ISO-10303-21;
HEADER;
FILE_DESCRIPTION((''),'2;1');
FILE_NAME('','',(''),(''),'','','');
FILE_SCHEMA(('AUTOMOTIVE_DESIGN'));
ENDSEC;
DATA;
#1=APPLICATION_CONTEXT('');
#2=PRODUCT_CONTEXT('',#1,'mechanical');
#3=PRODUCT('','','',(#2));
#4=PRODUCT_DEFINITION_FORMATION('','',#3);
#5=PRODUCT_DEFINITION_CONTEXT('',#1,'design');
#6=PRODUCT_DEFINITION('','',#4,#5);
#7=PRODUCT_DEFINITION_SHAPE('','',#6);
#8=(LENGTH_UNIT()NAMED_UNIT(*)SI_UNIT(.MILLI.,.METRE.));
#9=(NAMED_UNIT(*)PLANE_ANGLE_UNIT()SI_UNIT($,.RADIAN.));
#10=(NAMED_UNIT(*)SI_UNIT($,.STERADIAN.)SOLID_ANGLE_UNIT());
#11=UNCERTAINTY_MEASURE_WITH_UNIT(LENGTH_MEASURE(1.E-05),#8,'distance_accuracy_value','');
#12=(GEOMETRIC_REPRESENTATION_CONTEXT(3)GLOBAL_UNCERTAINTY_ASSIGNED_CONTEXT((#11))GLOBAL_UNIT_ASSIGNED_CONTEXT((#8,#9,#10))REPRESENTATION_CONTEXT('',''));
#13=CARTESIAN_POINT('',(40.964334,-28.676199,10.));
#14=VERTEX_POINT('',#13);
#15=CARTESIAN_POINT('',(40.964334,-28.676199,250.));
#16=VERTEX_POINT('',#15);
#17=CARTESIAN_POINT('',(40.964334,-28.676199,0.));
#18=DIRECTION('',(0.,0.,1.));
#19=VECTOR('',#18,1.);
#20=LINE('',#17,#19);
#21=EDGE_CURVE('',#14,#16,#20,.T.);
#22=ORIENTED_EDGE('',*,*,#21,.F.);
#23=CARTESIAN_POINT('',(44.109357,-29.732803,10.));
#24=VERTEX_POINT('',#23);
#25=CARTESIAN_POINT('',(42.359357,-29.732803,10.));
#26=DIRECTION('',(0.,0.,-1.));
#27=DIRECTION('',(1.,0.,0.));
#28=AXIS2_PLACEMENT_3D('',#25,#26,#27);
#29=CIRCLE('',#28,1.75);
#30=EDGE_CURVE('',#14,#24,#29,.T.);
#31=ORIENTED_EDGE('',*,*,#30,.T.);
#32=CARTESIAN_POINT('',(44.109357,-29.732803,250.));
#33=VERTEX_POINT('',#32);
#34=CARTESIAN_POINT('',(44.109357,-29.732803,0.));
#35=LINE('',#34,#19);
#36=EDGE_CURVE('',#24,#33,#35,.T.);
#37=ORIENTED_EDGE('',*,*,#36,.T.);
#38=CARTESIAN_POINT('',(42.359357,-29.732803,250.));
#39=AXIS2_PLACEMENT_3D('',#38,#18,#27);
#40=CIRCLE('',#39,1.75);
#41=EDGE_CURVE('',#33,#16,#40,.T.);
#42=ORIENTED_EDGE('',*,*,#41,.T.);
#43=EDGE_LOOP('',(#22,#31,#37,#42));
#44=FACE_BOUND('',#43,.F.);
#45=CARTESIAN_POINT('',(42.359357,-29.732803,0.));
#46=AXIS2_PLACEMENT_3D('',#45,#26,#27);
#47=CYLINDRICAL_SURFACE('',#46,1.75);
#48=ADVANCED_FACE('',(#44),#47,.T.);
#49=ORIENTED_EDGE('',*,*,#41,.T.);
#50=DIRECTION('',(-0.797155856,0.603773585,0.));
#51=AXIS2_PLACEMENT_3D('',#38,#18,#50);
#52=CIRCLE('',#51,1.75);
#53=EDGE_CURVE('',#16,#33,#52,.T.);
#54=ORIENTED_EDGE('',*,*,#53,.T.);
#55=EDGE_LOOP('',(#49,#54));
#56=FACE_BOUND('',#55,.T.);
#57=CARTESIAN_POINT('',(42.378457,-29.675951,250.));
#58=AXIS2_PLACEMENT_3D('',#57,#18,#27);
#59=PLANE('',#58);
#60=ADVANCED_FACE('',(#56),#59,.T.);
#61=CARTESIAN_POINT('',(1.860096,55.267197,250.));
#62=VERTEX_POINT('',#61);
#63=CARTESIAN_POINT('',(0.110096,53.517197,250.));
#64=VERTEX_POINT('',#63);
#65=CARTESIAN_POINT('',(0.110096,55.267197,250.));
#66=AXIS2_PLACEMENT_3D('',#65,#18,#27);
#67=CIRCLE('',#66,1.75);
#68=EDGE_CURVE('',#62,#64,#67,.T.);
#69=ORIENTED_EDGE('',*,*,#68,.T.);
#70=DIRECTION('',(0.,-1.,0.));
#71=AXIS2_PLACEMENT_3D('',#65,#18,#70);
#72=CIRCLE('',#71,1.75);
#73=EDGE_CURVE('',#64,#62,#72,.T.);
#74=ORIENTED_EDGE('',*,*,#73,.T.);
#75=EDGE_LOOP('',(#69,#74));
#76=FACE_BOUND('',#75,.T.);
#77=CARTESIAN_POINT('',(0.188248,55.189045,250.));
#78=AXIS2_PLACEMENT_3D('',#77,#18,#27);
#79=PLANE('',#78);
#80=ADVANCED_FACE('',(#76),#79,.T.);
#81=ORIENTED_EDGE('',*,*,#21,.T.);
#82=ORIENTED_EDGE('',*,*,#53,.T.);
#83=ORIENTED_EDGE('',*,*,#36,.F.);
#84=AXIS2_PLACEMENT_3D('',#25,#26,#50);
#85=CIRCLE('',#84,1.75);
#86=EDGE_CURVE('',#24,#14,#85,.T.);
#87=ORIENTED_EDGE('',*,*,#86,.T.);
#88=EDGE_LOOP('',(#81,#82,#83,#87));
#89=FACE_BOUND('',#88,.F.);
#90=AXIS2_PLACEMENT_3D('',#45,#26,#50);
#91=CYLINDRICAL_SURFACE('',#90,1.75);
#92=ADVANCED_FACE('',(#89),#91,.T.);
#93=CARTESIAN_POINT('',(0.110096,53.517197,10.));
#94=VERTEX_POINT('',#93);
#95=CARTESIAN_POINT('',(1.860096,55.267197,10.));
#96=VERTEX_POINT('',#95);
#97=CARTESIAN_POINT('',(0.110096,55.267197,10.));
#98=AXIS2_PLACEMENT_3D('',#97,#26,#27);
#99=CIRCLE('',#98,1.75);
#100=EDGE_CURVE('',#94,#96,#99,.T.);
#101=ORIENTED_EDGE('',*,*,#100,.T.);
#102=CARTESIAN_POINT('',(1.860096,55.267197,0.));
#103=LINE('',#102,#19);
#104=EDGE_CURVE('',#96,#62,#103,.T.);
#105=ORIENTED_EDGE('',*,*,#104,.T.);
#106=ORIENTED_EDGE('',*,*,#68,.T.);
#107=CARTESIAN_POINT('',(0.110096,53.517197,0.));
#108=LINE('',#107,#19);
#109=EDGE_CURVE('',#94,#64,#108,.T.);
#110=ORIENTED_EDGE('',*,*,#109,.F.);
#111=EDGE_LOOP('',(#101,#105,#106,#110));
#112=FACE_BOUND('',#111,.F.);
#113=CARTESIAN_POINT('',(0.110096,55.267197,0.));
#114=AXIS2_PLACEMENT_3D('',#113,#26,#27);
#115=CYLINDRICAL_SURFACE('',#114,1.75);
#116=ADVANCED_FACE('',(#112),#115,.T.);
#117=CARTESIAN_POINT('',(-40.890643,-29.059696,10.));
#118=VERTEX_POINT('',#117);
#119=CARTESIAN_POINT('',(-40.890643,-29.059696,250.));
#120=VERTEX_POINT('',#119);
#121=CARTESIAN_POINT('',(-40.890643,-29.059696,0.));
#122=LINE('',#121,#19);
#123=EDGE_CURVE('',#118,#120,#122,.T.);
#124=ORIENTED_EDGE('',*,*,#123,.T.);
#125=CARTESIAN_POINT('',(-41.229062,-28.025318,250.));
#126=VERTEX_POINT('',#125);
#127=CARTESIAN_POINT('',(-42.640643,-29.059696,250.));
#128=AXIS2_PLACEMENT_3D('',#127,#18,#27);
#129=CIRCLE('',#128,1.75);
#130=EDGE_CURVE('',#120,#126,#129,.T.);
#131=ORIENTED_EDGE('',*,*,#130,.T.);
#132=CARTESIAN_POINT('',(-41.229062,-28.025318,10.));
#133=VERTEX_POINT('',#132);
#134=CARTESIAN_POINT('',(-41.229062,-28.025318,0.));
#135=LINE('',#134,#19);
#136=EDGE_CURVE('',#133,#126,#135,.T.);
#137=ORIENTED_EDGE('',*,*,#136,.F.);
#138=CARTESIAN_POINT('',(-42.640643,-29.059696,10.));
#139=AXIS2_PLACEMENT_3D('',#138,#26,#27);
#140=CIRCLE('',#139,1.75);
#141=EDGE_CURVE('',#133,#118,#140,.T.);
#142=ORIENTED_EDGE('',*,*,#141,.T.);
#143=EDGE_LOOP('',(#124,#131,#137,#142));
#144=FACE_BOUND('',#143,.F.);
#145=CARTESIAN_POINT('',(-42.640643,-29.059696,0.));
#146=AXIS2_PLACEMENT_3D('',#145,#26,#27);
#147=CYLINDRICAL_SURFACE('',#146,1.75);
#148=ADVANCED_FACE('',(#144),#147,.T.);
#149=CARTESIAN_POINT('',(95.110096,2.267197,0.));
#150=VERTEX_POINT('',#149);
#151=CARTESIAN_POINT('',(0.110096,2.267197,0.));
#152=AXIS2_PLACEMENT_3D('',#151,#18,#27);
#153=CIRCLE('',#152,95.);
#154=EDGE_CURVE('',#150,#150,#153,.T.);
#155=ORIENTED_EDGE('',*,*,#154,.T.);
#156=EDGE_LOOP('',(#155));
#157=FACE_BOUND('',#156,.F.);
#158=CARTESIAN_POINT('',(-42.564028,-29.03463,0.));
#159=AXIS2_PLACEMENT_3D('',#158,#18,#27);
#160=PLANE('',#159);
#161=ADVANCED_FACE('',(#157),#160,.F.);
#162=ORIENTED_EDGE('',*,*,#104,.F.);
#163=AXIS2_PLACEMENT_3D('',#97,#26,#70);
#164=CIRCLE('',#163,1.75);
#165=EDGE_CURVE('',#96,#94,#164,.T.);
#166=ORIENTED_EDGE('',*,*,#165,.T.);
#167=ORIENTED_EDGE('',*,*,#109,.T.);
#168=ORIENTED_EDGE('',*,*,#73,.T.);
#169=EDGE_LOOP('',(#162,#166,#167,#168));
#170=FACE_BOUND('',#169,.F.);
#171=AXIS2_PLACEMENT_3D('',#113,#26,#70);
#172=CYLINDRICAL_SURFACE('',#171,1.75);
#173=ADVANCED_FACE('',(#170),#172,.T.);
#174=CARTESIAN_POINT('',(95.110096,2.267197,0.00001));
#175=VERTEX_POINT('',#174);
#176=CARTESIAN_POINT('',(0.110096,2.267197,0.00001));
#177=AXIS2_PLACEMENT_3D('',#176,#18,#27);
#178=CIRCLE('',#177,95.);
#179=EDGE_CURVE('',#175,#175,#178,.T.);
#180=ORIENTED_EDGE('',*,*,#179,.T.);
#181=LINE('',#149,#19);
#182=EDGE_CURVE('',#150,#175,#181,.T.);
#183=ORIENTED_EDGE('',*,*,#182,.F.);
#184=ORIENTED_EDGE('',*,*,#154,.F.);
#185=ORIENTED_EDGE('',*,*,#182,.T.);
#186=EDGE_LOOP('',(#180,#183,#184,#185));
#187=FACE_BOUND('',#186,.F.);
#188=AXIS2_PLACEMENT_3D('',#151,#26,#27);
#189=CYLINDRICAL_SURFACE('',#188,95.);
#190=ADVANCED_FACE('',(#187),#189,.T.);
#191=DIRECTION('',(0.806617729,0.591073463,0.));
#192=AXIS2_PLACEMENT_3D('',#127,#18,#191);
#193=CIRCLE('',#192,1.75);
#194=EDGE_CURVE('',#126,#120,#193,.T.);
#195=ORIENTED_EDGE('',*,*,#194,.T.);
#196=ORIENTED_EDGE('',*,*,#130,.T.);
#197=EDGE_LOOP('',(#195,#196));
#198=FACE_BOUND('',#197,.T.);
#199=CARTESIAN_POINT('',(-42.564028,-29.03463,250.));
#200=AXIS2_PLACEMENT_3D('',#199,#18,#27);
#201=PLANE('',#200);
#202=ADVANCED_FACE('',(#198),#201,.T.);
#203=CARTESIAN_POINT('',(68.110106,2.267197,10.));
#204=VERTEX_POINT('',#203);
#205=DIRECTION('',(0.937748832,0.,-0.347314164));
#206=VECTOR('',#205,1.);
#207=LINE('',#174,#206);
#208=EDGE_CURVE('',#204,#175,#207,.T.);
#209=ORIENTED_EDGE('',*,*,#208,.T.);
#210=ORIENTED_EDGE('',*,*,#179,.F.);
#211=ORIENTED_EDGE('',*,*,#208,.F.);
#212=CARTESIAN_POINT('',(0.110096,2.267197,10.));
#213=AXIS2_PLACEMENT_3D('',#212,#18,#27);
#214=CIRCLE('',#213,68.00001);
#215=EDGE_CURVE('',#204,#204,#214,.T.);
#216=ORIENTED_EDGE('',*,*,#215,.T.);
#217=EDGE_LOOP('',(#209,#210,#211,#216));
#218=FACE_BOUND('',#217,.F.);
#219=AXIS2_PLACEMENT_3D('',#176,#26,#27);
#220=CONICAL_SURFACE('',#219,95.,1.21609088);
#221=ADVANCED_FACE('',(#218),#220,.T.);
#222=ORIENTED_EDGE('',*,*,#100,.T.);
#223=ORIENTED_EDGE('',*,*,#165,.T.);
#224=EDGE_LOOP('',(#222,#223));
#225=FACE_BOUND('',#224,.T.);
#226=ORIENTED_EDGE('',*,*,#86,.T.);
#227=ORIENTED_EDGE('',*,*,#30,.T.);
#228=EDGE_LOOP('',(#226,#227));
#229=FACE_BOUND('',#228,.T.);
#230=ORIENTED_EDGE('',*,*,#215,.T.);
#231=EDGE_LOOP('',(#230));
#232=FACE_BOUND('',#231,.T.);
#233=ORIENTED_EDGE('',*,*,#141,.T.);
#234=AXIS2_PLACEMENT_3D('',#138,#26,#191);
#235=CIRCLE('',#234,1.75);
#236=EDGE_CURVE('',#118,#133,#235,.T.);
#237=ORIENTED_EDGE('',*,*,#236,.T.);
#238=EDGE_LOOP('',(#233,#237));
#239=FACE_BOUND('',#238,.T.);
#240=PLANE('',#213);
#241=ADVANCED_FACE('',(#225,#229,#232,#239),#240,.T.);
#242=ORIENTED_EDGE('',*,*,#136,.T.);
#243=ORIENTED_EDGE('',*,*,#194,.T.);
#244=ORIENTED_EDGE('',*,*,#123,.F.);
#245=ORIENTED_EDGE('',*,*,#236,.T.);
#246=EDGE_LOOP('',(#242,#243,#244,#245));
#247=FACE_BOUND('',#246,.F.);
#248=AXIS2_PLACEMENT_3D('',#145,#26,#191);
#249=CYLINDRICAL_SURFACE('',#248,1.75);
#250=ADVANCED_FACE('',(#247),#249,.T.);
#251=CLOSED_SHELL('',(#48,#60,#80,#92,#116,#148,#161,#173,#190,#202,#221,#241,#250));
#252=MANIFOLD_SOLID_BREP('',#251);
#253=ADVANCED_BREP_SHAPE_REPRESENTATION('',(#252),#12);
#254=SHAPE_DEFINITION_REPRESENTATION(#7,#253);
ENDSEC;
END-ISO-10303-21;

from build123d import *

# Parameters (mm, degrees)
F0_R     = 95
F0_R_2   = 67.5
F1_DEPTH = 10
F2_DEPTH = 250
F3_SIZE2 = 9.99999
F3_SIZE  = 26.99999


# Not quite as in the source:
# - a fillet or chamfer is up to 0.001 mm smaller than in the source, because OpenCascade refuses the exact size


with BuildPart() as f1:
    # F0 (on Top) → F1 (new body)
    with BuildSketch(Plane.XY):
        with Locations((0.1100962768, 2.267197317)):
            Circle(F0_R)
        with Locations((0.1100962768, 2.267197317)):
            Circle(F0_R_2, mode=Mode.SUBTRACT)
        with Locations((0.1100962768, 2.267197317)):
            Circle(F0_R_2)
        with BuildLine():
            ThreePointArc((6.0992865392, 51.907197317), (37.5230586904, 35.4375190435), (50.1100962768, 2.267197317))
            ThreePointArc((50.1100962768, 2.267197317), (48.3767855016, -10.783730285), (43.2970278259, -22.9298053495))
            ThreePointArc((43.2970278259, -22.9298053495), (45.8842269178, -26.923009929), (44.7508248724, -31.5441225396))
            ThreePointArc((44.7508248724, -31.5441225396), (40.609581916, -33.8870690977), (36.064798075, -32.4784415259))
            ThreePointArc((36.064798075, -32.4784415259), (-0.285836282, -47.7312350325), (-36.3903563745, -31.9046764427))
            ThreePointArc((-36.3903563745, -31.9046764427), (-40.9568776568, -33.2411525931), (-45.060496325, -30.8329169426))
            ThreePointArc((-45.060496325, -30.8329169426), (-46.1205736098, -26.1944339166), (-43.4704592341, -22.2427023433))
            ThreePointArc((-43.4704592341, -22.2427023433), (-44.4863366402, 24.8760046956), (-5.8790939857, 51.907197317))
            ThreePointArc((-5.8790939857, 51.907197317), (-4.2579696568, 56.3805900773), (0.1100962768, 58.267197317))
            ThreePointArc((0.1100962768, 58.267197317), (4.4781622103, 56.3805900773), (6.0992865392, 51.907197317))
        make_face(mode=Mode.SUBTRACT)
        with BuildLine():
            ThreePointArc((45.1100962768, 2.267197317), (31.9299014302, 34.0870024704), (0.1100962768, 47.267197317))
            Line((0.1100962768, 47.267197317), (0.1100962768, 2.267197317))
            Line((0.1100962768, 2.267197317), (35.9821097803, -24.9026140037))
            ThreePointArc((35.9821097803, -24.9026140037), (42.7671039523, -12.0638771776), (45.1100962768, 2.267197317))
        make_face()
        with BuildLine():
            Line((0.1100962768, 2.267197317), (0.1100962768, 47.267197317))
            ThreePointArc((0.1100962768, 47.267197317), (-40.0266933485, 22.6151239577), (-36.1877015405, -24.3311085241))
            Line((-36.1877015405, -24.3311085241), (0.1100962768, 2.267197317))
        make_face()
        with BuildLine():
            ThreePointArc((-36.1877015405, -24.3311085241), (-0.2462430261, -42.7313917975), (35.9821097803, -24.9026140037))
            Line((35.9821097803, -24.9026140037), (0.1100962768, 2.267197317))
            Line((0.1100962768, 2.267197317), (-36.1877015405, -24.3311085241))
        make_face()
        with BuildLine():
            ThreePointArc((48.6100962768, 2.267197317), (34.4047751643, 36.5618762046), (0.1100962768, 50.767197317))
            Line((0.1100962768, 50.767197317), (0.1100962768, 48.267197317))
            ThreePointArc((0.1100962768, 48.267197317), (32.6370082114, 34.7941092516), (46.1100962768, 2.267197317))
            ThreePointArc((46.1100962768, 2.267197317), (43.7150374562, -12.3823454997), (36.7792656359, -25.5063875886))
            Line((36.7792656359, -25.5063875886), (38.772155275, -27.0158215509))
            ThreePointArc((38.772155275, -27.0158215509), (46.0848712159, -13.178516305), (48.6100962768, 2.267197317))
        make_face()
        with BuildLine():
            Line((0.1100962768, 48.267197317), (0.1100962768, 50.767197317))
            ThreePointArc((0.1100962768, 50.767197317), (-43.1484436527, 24.1977404742), (-39.0108635929, -26.399865645))
            Line((-39.0108635929, -26.399865645), (-36.9943192698, -24.9221819872))
            ThreePointArc((-36.9943192698, -24.9221819872), (-40.9186220069, 23.0673001053), (0.1100962768, 48.267197317))
        make_face()
        with BuildLine():
            ThreePointArc((-39.0108635929, -26.399865645), (-0.2739583052, -46.231282062), (38.772155275, -27.0158215509))
            Line((38.772155275, -27.0158215509), (36.7792656359, -25.5063875886))
            ThreePointArc((36.7792656359, -25.5063875886), (-0.2541616773, -43.7313604445), (-36.9943192698, -24.9221819872))
            Line((-36.9943192698, -24.9221819872), (-39.0108635929, -26.399865645))
        make_face()
        with BuildLine():
            ThreePointArc((43.2970278259, -22.9298053495), (48.3767855016, -10.783730285), (50.1100962768, 2.267197317))
            ThreePointArc((50.1100962768, 2.267197317), (37.5230586904, 35.4375190435), (6.0992865392, 51.907197317))
            ThreePointArc((6.0992865392, 51.907197317), (3.1100962768, 52.1771161709), (0.1100962768, 52.267197317))
            Line((0.1100962768, 52.267197317), (0.1100962768, 50.767197317))
            ThreePointArc((0.1100962768, 50.767197317), (34.4047751643, 36.5618762046), (48.6100962768, 2.267197317))
            ThreePointArc((48.6100962768, 2.267197317), (46.0848712159, -13.178516305), (38.772155275, -27.0158215509))
            Line((38.772155275, -27.0158215509), (39.9678890584, -27.9214819282))
            ThreePointArc((39.967889049, -27.9214819407), (41.7074010957, -25.4756257513), (43.2970278259, -22.9298053495))
        make_face()
        with BuildLine():
            Line((0.1100962768, 50.767197317), (0.1100962768, 52.267197317))
            ThreePointArc((0.1100962768, 52.267197317), (-2.8899037232, 52.1771161709), (-5.8790939857, 51.907197317))
            ThreePointArc((-5.8790939857, 51.907197317), (-44.4863366402, 24.8760046956), (-43.4704592341, -22.2427023433))
            ThreePointArc((-43.4704592341, -22.2427023433), (-41.9213495256, -24.8133780786), (-40.2207901845, -27.286475843))
            Line((-40.2207901869, -27.2864758397), (-39.0108635929, -26.399865645))
            ThreePointArc((-39.0108635929, -26.399865645), (-43.1484436527, 24.1977404742), (0.1100962768, 50.767197317))
        make_face()
        with BuildLine():
            ThreePointArc((36.064798075, -32.4784415259), (38.0847595855, -30.2585608845), (39.967889049, -27.9214819407))
            Line((39.9678890584, -27.9214819282), (38.772155275, -27.0158215509))
            ThreePointArc((38.772155275, -27.0158215509), (-0.2739583052, -46.231282062), (-39.0108635929, -26.399865645))
            Line((-39.0108635929, -26.399865645), (-40.2207901869, -27.2864758397))
            ThreePointArc((-40.2207901845, -27.286475843), (-38.3749087466, -29.6530844541), (-36.3903563745, -31.9046764427))
            ThreePointArc((-36.3903563745, -31.9046764427), (-0.285836282, -47.7312350325), (36.064798075, -32.4784415259))
        make_face()
        with BuildLine():
            ThreePointArc((46.1100962768, 2.267197317), (32.6370082114, 34.7941092516), (0.1100962768, 48.267197317))
            Line((0.1100962768, 48.267197317), (0.1100962768, 47.267197317))
            ThreePointArc((0.1100962768, 47.267197317), (31.9299014302, 34.0870024704), (45.1100962768, 2.267197317))
            ThreePointArc((45.1100962768, 2.267197317), (42.7671039523, -12.0638771776), (35.9821097803, -24.9026140037))
            Line((35.9821097803, -24.9026140037), (36.7792656359, -25.5063875886))
            ThreePointArc((36.7792656359, -25.5063875886), (43.7150374562, -12.3823454997), (46.1100962768, 2.267197317))
        make_face()
        with BuildLine():
            Line((0.1100962768, 47.267197317), (0.1100962768, 48.267197317))
            ThreePointArc((0.1100962768, 48.267197317), (-40.9186220069, 23.0673001053), (-36.9943192698, -24.9221819872))
            Line((-36.9943192698, -24.9221819872), (-36.1877015405, -24.3311085241))
            ThreePointArc((-36.1877015405, -24.3311085241), (-40.0266933485, 22.6151239577), (0.1100962768, 47.267197317))
        make_face()
        with BuildLine():
            ThreePointArc((-36.9943192698, -24.9221819872), (-0.2541616773, -43.7313604445), (36.7792656359, -25.5063875886))
            Line((36.7792656359, -25.5063875886), (35.9821097803, -24.9026140037))
            ThreePointArc((35.9821097803, -24.9026140037), (-0.2462430261, -42.7313917975), (-36.1877015405, -24.3311085241))
            Line((-36.1877015405, -24.3311085241), (-36.9943192698, -24.9221819872))
        make_face()
        with BuildLine():
            ThreePointArc((45.3593566253, -29.732802683), (43.3147615842, -26.8890021688), (39.967889049, -27.9214819407))
            ThreePointArc((39.967889049, -27.9214819407), (40.5480363259, -32.1242705947), (44.7508248724, -31.5441225396))
            ThreePointArc((44.7508248724, -31.5441225396), (45.2031573164, -30.6882071153), (45.3593566253, -29.732802683))
        make_face()
        with BuildLine():
            ThreePointArc((44.1093566253, -29.732802683), (41.8020370616, -31.3916863148), (40.964333878, -28.6761989094))
            ThreePointArc((40.964333878, -28.6761989094), (42.916676189, -28.0739190511), (44.1093566253, -29.732802683))
        make_face(mode=Mode.SUBTRACT)
        with BuildLine():
            ThreePointArc((-39.6406433747, -29.0596962292), (-39.7893665054, -28.1268402839), (-40.2207901845, -27.286475843))
            ThreePointArc((-40.2207901845, -27.286475843), (-44.4138639245, -26.6398431589), (-45.060496325, -30.8329169426))
            ThreePointArc((-45.060496325, -30.8329169426), (-41.7077872365, -31.9109730354), (-39.6406433747, -29.0596962292))
        make_face()
        with BuildLine():
            ThreePointArc((-40.8906433747, -29.0596962292), (-44.3038882147, -29.6038621984), (-41.2290623484, -28.0253176687))
            ThreePointArc((-41.2290623484, -28.0253176687), (-40.9773985346, -28.5155302599), (-40.8906433747, -29.0596962292))
        make_face(mode=Mode.SUBTRACT)
        with BuildLine():
            ThreePointArc((0.1100962768, 58.267197317), (-2.8899037232, 55.267197317), (0.1100962768, 52.267197317))
            ThreePointArc((0.1100962768, 52.267197317), (2.2314166203, 53.1458769735), (3.1100962768, 55.267197317))
            ThreePointArc((3.1100962768, 55.267197317), (2.2314166203, 57.3885176606), (0.1100962768, 58.267197317))
        make_face()
        with BuildLine():
            ThreePointArc((1.8600962768, 55.267197317), (1.3475331438, 54.02976045), (0.1100962768, 53.517197317))
            ThreePointArc((0.1100962768, 53.517197317), (-1.1273405903, 56.5046341841), (1.8600962768, 55.267197317))
        make_face(mode=Mode.SUBTRACT)
        with BuildLine():
            ThreePointArc((0.1100962768, 52.267197317), (3.1100962768, 52.1771161709), (6.0992865392, 51.907197317))
            ThreePointArc((6.0992865392, 51.907197317), (4.4781622103, 56.3805900773), (0.1100962768, 58.267197317))
            ThreePointArc((0.1100962768, 58.267197317), (2.2314166203, 57.3885176606), (3.1100962768, 55.267197317))
            ThreePointArc((3.1100962768, 55.267197317), (2.2314166203, 53.1458769735), (0.1100962768, 52.267197317))
        make_face()
        with BuildLine():
            ThreePointArc((-5.8790939857, 51.907197317), (-2.8899037232, 52.1771161709), (0.1100962768, 52.267197317))
            ThreePointArc((0.1100962768, 52.267197317), (-2.8899037232, 55.267197317), (0.1100962768, 58.267197317))
            ThreePointArc((0.1100962768, 58.267197317), (-4.2579696568, 56.3805900773), (-5.8790939857, 51.907197317))
        make_face()
        with BuildLine():
            ThreePointArc((-40.2207901845, -27.286475843), (-41.9213495256, -24.8133780786), (-43.4704592341, -22.2427023433))
            ThreePointArc((-43.4704592341, -22.2427023433), (-46.1205736098, -26.1944339166), (-45.060496325, -30.8329169426))
            ThreePointArc((-45.060496325, -30.8329169426), (-44.4138639245, -26.6398431589), (-40.2207901845, -27.286475843))
        make_face()
        with BuildLine():
            ThreePointArc((-45.060496325, -30.8329169426), (-40.9568776568, -33.2411525931), (-36.3903563745, -31.9046764427))
            ThreePointArc((-36.3903563745, -31.9046764427), (-38.3749087466, -29.6530844541), (-40.2207901845, -27.286475843))
            ThreePointArc((-40.2207901845, -27.286475843), (-39.7893665054, -28.1268402839), (-39.6406433747, -29.0596962292))
            ThreePointArc((-39.6406433747, -29.0596962292), (-41.7077872365, -31.9109730354), (-45.060496325, -30.8329169426))
        make_face()
        with BuildLine():
            ThreePointArc((44.7508248724, -31.5441225396), (40.5480363259, -32.1242705947), (39.967889049, -27.9214819407))
            ThreePointArc((39.967889049, -27.9214819407), (38.0847595855, -30.2585608845), (36.064798075, -32.4784415259))
            ThreePointArc((36.064798075, -32.4784415259), (40.609581916, -33.8870690977), (44.7508248724, -31.5441225396))
        make_face()
        with BuildLine():
            ThreePointArc((44.7508248724, -31.5441225396), (45.8842269178, -26.923009929), (43.2970278259, -22.9298053495))
            ThreePointArc((43.2970278259, -22.9298053495), (41.7074010957, -25.4756257513), (39.967889049, -27.9214819407))
            ThreePointArc((39.967889049, -27.9214819407), (43.3147615842, -26.8890021688), (45.3593566253, -29.732802683))
            ThreePointArc((45.3593566253, -29.732802683), (45.2031573164, -30.6882071153), (44.7508248724, -31.5441225396))
        make_face()
        with BuildLine():
            ThreePointArc((-40.8906433747, -29.0596962292), (-40.9773985346, -28.5155302599), (-41.2290623484, -28.0253176687))
            ThreePointArc((-41.2290623484, -28.0253176687), (-44.3038882147, -29.6038621984), (-40.8906433747, -29.0596962292))
        make_face()
        with BuildLine():
            ThreePointArc((1.8600962768, 55.267197317), (-1.1273405903, 56.5046341841), (0.1100962768, 53.517197317))
            ThreePointArc((0.1100962768, 53.517197317), (1.3475331438, 54.02976045), (1.8600962768, 55.267197317))
        make_face()
        with BuildLine():
            ThreePointArc((44.1093566253, -29.732802683), (42.916676189, -28.0739190511), (40.964333878, -28.6761989094))
            ThreePointArc((40.964333878, -28.6761989094), (41.8020370616, -31.3916863148), (44.1093566253, -29.732802683))
        make_face()
    extrude(amount=F1_DEPTH)

    # F0 (on Top) → F2 (join)
    with BuildSketch(Plane.XY):
        with BuildLine():
            ThreePointArc((-40.8906433747, -29.0596962292), (-40.9773985346, -28.5155302599), (-41.2290623484, -28.0253176687))
            ThreePointArc((-41.2290623484, -28.0253176687), (-44.3038882147, -29.6038621984), (-40.8906433747, -29.0596962292))
        make_face()
        with BuildLine():
            ThreePointArc((44.1093566253, -29.732802683), (42.916676189, -28.0739190511), (40.964333878, -28.6761989094))
            ThreePointArc((40.964333878, -28.6761989094), (41.8020370616, -31.3916863148), (44.1093566253, -29.732802683))
        make_face()
        with BuildLine():
            ThreePointArc((1.8600962768, 55.267197317), (-1.1273405903, 56.5046341841), (0.1100962768, 53.517197317))
            ThreePointArc((0.1100962768, 53.517197317), (1.3475331438, 54.02976045), (1.8600962768, 55.267197317))
        make_face()
    extrude(amount=F2_DEPTH)

    # F3 (size 27 and 10 in the source; OpenCascade refuses exactly that, so slightly less here)
    f3_edges = [f1.edges().sort_by_distance(p)[0] for p in [
        (-94.889904, 2.267197, 10),
    ]]
    f3_side = f1.faces().sort_by_distance((0.110267, 2.270705, 10))[0]
    chamfer(f3_edges, length=F3_SIZE, length2=F3_SIZE2, reference=f3_side)


solid = f1.part
